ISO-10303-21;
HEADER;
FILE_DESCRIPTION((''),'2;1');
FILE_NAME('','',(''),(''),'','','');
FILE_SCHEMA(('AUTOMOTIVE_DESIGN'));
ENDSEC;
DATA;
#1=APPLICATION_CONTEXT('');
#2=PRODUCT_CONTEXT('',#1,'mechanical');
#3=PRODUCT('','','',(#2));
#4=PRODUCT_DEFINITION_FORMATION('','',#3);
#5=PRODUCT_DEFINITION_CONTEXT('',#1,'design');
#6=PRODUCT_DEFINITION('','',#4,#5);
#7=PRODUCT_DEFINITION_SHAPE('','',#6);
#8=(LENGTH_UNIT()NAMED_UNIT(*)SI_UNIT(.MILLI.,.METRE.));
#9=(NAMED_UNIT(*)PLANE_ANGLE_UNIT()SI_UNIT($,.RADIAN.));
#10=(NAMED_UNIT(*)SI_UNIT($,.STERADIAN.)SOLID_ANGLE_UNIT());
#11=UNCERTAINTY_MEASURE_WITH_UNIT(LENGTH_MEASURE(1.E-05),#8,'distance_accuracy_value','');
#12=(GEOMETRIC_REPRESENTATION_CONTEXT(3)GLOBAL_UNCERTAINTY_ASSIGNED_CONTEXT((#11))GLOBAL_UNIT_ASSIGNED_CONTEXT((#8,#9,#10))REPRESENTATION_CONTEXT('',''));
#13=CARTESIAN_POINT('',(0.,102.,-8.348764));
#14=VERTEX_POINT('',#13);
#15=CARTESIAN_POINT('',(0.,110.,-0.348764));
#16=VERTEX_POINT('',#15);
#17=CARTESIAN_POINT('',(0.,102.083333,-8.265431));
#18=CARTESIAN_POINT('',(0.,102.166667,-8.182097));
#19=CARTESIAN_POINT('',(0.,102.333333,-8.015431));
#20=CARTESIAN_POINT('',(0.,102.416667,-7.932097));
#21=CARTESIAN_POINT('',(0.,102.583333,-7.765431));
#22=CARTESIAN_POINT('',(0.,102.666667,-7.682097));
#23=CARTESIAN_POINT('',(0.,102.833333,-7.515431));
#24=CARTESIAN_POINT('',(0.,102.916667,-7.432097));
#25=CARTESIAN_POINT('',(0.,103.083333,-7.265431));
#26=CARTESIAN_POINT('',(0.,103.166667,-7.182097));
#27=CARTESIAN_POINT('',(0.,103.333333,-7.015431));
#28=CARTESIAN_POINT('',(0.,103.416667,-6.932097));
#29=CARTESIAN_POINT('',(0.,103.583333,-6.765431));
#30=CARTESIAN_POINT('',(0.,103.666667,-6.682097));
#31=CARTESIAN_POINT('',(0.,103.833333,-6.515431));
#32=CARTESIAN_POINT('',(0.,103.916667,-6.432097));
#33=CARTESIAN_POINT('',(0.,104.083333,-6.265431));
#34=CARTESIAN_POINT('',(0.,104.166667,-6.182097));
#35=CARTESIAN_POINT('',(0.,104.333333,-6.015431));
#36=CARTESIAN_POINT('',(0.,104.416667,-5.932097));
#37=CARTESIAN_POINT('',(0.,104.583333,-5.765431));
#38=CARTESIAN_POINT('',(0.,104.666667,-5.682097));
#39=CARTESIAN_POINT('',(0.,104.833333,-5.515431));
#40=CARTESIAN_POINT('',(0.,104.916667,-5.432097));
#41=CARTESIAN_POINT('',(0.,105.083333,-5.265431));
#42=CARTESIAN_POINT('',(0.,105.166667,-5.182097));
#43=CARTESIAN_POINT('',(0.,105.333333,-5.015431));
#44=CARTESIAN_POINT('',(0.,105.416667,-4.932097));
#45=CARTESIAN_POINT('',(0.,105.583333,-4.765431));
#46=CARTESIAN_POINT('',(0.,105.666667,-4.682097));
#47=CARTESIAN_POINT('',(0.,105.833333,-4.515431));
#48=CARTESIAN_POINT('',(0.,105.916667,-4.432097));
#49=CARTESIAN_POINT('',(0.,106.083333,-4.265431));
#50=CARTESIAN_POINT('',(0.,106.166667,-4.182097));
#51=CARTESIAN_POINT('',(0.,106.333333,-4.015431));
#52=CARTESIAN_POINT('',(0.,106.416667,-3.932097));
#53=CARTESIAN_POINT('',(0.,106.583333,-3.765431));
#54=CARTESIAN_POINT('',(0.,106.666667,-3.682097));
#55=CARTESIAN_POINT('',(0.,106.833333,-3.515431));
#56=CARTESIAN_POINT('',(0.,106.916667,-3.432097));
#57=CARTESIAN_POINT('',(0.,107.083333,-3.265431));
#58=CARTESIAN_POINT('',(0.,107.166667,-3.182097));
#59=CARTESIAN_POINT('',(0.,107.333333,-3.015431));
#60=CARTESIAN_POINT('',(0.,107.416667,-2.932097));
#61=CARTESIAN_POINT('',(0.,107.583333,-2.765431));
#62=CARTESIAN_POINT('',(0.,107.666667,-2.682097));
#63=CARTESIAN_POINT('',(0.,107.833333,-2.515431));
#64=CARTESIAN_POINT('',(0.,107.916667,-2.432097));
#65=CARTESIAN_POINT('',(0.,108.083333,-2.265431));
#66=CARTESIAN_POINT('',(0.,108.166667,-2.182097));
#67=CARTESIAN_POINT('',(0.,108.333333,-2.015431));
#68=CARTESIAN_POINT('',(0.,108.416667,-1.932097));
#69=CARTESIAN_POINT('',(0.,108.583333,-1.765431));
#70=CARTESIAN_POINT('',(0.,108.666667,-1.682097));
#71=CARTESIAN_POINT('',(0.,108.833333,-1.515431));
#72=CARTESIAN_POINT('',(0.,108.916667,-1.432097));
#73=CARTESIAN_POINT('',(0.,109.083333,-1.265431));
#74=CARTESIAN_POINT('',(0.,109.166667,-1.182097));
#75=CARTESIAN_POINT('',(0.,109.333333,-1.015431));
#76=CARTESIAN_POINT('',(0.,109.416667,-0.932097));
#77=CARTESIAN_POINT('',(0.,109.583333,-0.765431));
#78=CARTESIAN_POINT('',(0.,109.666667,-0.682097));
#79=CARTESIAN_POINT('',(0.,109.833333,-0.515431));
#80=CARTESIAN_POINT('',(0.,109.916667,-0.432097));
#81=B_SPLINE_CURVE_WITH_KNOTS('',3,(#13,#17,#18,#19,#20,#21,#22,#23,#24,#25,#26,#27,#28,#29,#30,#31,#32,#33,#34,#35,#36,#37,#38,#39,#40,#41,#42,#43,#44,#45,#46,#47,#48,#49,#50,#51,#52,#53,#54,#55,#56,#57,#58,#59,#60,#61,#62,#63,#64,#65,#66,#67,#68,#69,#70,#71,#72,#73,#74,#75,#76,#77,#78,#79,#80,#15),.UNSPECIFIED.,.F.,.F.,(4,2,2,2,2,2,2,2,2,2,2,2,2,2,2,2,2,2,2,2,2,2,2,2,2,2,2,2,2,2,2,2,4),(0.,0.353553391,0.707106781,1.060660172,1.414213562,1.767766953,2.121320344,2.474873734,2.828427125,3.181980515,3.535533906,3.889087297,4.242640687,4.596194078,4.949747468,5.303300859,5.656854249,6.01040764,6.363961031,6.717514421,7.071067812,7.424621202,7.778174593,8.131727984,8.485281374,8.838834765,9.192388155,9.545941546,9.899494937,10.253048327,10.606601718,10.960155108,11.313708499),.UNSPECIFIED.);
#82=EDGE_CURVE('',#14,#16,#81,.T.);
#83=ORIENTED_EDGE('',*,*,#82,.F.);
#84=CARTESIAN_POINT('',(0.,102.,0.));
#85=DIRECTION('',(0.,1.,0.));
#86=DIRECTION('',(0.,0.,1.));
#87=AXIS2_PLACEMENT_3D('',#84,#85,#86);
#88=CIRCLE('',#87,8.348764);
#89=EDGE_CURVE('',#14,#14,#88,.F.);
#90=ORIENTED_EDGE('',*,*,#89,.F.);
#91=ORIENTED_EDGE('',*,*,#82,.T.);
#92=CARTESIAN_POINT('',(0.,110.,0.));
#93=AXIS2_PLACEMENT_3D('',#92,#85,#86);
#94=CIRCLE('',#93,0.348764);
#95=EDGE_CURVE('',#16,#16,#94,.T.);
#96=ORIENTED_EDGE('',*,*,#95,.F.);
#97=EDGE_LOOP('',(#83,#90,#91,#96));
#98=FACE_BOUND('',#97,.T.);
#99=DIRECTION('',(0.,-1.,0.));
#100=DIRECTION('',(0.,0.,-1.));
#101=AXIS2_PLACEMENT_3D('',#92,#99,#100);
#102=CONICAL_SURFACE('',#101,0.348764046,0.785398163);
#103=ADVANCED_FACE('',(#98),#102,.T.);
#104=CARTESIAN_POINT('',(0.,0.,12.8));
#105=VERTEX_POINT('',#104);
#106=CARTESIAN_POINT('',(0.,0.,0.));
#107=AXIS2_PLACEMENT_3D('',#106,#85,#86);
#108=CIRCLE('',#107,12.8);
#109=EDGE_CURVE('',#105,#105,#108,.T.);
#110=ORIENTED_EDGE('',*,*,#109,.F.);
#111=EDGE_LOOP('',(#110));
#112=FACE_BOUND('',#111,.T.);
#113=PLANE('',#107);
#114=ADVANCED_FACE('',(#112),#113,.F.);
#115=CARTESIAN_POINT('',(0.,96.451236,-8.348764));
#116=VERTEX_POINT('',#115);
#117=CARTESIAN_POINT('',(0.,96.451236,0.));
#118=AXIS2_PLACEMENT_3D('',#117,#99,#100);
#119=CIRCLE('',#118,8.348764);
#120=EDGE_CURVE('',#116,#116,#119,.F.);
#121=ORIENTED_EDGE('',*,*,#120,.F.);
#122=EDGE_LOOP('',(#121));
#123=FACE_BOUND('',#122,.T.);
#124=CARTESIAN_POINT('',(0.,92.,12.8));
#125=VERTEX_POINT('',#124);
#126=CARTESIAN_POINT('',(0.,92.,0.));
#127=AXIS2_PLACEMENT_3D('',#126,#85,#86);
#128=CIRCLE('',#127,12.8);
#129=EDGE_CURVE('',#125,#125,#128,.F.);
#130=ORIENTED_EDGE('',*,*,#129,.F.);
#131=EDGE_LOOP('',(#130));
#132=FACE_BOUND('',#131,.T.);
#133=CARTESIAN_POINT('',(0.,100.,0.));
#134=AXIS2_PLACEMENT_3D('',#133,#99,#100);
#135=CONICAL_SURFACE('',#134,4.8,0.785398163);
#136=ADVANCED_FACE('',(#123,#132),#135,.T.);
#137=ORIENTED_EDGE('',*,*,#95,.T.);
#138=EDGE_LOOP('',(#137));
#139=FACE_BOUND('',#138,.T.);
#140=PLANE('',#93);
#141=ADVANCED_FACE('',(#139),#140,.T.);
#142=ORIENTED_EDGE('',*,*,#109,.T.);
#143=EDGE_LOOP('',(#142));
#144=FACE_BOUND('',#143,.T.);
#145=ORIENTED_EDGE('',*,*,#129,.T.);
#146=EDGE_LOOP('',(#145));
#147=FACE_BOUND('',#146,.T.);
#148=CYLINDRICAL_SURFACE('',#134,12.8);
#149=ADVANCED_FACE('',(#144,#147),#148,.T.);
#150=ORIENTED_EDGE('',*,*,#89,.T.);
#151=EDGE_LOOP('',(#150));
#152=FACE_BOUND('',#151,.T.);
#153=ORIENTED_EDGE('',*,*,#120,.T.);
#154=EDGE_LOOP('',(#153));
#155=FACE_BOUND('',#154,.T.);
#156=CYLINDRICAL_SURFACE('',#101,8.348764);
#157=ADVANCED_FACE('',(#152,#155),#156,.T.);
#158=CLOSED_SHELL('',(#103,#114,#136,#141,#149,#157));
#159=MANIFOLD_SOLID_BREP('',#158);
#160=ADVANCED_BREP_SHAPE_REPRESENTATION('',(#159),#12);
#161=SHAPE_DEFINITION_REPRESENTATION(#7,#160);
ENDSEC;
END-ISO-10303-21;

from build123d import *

# Parameters (mm, degrees)
SKETCH1_R           = 12.8
BOSS_EXTRUDE1_DEPTH = 100
SKETCH3_R           = 8.348764046
BOSS_EXTRUDE3_DEPTH = 10
CHAMFER3_SIZE       = 8
CHAMFER4_SIZE       = 8


with BuildPart() as part:
    # Sketch1 → Boss-Extrude1 (new body)
    with BuildSketch(Plane(origin=(0, 0, 0), x_dir=(1, 0, 0), z_dir=(0, 1, 0))):
        with Locations(Location((0, 0, 0), (0, 0, 270))):
            Circle(SKETCH1_R)
    extrude(amount=BOSS_EXTRUDE1_DEPTH)

    # Sketch3 → Boss-Extrude3 (add)
    with BuildSketch(Plane(origin=(0, 100, 0), x_dir=(1, 0, 0), z_dir=(0, 1, 0))):
        with Locations(Location((0, 0, 0), (0, 0, 270))):
            Circle(SKETCH3_R)
    extrude(amount=BOSS_EXTRUDE3_DEPTH)

    # Chamfer3
    chamfer3_edges = [part.edges().sort_by_distance(p)[0] for p in [
        (0, 110, -8.348764046),
    ]]
    chamfer(chamfer3_edges, length=CHAMFER3_SIZE)

    # Chamfer4
    # the kernel refuses this chamfer: 8 mm, written as the material it takes off along each edge
    with BuildSketch(Plane(origin=(0, 100, 0), x_dir=(0, 0, 1), z_dir=(-1, 0, 0))) as chamfer4_piece_1_section:
        Polygon((12.8 - CHAMFER4_SIZE, 0), (12.8, -CHAMFER4_SIZE), (12.8, 0), align=None)
    chamfer4_piece_1 = revolve(axis=Axis((0, 100, 0), (0, 1, 0)), mode=Mode.PRIVATE)
    chamfer4_piece_1 = chamfer4_piece_1 - Plane(origin=(0, 94.200473473, 0), x_dir=(0, 0, 1), z_dir=(0, -1, 0)) * Cylinder(8.348764046, 52, mode=Mode.PRIVATE)
    add(chamfer4_piece_1, mode=Mode.SUBTRACT)


solid = part.part
